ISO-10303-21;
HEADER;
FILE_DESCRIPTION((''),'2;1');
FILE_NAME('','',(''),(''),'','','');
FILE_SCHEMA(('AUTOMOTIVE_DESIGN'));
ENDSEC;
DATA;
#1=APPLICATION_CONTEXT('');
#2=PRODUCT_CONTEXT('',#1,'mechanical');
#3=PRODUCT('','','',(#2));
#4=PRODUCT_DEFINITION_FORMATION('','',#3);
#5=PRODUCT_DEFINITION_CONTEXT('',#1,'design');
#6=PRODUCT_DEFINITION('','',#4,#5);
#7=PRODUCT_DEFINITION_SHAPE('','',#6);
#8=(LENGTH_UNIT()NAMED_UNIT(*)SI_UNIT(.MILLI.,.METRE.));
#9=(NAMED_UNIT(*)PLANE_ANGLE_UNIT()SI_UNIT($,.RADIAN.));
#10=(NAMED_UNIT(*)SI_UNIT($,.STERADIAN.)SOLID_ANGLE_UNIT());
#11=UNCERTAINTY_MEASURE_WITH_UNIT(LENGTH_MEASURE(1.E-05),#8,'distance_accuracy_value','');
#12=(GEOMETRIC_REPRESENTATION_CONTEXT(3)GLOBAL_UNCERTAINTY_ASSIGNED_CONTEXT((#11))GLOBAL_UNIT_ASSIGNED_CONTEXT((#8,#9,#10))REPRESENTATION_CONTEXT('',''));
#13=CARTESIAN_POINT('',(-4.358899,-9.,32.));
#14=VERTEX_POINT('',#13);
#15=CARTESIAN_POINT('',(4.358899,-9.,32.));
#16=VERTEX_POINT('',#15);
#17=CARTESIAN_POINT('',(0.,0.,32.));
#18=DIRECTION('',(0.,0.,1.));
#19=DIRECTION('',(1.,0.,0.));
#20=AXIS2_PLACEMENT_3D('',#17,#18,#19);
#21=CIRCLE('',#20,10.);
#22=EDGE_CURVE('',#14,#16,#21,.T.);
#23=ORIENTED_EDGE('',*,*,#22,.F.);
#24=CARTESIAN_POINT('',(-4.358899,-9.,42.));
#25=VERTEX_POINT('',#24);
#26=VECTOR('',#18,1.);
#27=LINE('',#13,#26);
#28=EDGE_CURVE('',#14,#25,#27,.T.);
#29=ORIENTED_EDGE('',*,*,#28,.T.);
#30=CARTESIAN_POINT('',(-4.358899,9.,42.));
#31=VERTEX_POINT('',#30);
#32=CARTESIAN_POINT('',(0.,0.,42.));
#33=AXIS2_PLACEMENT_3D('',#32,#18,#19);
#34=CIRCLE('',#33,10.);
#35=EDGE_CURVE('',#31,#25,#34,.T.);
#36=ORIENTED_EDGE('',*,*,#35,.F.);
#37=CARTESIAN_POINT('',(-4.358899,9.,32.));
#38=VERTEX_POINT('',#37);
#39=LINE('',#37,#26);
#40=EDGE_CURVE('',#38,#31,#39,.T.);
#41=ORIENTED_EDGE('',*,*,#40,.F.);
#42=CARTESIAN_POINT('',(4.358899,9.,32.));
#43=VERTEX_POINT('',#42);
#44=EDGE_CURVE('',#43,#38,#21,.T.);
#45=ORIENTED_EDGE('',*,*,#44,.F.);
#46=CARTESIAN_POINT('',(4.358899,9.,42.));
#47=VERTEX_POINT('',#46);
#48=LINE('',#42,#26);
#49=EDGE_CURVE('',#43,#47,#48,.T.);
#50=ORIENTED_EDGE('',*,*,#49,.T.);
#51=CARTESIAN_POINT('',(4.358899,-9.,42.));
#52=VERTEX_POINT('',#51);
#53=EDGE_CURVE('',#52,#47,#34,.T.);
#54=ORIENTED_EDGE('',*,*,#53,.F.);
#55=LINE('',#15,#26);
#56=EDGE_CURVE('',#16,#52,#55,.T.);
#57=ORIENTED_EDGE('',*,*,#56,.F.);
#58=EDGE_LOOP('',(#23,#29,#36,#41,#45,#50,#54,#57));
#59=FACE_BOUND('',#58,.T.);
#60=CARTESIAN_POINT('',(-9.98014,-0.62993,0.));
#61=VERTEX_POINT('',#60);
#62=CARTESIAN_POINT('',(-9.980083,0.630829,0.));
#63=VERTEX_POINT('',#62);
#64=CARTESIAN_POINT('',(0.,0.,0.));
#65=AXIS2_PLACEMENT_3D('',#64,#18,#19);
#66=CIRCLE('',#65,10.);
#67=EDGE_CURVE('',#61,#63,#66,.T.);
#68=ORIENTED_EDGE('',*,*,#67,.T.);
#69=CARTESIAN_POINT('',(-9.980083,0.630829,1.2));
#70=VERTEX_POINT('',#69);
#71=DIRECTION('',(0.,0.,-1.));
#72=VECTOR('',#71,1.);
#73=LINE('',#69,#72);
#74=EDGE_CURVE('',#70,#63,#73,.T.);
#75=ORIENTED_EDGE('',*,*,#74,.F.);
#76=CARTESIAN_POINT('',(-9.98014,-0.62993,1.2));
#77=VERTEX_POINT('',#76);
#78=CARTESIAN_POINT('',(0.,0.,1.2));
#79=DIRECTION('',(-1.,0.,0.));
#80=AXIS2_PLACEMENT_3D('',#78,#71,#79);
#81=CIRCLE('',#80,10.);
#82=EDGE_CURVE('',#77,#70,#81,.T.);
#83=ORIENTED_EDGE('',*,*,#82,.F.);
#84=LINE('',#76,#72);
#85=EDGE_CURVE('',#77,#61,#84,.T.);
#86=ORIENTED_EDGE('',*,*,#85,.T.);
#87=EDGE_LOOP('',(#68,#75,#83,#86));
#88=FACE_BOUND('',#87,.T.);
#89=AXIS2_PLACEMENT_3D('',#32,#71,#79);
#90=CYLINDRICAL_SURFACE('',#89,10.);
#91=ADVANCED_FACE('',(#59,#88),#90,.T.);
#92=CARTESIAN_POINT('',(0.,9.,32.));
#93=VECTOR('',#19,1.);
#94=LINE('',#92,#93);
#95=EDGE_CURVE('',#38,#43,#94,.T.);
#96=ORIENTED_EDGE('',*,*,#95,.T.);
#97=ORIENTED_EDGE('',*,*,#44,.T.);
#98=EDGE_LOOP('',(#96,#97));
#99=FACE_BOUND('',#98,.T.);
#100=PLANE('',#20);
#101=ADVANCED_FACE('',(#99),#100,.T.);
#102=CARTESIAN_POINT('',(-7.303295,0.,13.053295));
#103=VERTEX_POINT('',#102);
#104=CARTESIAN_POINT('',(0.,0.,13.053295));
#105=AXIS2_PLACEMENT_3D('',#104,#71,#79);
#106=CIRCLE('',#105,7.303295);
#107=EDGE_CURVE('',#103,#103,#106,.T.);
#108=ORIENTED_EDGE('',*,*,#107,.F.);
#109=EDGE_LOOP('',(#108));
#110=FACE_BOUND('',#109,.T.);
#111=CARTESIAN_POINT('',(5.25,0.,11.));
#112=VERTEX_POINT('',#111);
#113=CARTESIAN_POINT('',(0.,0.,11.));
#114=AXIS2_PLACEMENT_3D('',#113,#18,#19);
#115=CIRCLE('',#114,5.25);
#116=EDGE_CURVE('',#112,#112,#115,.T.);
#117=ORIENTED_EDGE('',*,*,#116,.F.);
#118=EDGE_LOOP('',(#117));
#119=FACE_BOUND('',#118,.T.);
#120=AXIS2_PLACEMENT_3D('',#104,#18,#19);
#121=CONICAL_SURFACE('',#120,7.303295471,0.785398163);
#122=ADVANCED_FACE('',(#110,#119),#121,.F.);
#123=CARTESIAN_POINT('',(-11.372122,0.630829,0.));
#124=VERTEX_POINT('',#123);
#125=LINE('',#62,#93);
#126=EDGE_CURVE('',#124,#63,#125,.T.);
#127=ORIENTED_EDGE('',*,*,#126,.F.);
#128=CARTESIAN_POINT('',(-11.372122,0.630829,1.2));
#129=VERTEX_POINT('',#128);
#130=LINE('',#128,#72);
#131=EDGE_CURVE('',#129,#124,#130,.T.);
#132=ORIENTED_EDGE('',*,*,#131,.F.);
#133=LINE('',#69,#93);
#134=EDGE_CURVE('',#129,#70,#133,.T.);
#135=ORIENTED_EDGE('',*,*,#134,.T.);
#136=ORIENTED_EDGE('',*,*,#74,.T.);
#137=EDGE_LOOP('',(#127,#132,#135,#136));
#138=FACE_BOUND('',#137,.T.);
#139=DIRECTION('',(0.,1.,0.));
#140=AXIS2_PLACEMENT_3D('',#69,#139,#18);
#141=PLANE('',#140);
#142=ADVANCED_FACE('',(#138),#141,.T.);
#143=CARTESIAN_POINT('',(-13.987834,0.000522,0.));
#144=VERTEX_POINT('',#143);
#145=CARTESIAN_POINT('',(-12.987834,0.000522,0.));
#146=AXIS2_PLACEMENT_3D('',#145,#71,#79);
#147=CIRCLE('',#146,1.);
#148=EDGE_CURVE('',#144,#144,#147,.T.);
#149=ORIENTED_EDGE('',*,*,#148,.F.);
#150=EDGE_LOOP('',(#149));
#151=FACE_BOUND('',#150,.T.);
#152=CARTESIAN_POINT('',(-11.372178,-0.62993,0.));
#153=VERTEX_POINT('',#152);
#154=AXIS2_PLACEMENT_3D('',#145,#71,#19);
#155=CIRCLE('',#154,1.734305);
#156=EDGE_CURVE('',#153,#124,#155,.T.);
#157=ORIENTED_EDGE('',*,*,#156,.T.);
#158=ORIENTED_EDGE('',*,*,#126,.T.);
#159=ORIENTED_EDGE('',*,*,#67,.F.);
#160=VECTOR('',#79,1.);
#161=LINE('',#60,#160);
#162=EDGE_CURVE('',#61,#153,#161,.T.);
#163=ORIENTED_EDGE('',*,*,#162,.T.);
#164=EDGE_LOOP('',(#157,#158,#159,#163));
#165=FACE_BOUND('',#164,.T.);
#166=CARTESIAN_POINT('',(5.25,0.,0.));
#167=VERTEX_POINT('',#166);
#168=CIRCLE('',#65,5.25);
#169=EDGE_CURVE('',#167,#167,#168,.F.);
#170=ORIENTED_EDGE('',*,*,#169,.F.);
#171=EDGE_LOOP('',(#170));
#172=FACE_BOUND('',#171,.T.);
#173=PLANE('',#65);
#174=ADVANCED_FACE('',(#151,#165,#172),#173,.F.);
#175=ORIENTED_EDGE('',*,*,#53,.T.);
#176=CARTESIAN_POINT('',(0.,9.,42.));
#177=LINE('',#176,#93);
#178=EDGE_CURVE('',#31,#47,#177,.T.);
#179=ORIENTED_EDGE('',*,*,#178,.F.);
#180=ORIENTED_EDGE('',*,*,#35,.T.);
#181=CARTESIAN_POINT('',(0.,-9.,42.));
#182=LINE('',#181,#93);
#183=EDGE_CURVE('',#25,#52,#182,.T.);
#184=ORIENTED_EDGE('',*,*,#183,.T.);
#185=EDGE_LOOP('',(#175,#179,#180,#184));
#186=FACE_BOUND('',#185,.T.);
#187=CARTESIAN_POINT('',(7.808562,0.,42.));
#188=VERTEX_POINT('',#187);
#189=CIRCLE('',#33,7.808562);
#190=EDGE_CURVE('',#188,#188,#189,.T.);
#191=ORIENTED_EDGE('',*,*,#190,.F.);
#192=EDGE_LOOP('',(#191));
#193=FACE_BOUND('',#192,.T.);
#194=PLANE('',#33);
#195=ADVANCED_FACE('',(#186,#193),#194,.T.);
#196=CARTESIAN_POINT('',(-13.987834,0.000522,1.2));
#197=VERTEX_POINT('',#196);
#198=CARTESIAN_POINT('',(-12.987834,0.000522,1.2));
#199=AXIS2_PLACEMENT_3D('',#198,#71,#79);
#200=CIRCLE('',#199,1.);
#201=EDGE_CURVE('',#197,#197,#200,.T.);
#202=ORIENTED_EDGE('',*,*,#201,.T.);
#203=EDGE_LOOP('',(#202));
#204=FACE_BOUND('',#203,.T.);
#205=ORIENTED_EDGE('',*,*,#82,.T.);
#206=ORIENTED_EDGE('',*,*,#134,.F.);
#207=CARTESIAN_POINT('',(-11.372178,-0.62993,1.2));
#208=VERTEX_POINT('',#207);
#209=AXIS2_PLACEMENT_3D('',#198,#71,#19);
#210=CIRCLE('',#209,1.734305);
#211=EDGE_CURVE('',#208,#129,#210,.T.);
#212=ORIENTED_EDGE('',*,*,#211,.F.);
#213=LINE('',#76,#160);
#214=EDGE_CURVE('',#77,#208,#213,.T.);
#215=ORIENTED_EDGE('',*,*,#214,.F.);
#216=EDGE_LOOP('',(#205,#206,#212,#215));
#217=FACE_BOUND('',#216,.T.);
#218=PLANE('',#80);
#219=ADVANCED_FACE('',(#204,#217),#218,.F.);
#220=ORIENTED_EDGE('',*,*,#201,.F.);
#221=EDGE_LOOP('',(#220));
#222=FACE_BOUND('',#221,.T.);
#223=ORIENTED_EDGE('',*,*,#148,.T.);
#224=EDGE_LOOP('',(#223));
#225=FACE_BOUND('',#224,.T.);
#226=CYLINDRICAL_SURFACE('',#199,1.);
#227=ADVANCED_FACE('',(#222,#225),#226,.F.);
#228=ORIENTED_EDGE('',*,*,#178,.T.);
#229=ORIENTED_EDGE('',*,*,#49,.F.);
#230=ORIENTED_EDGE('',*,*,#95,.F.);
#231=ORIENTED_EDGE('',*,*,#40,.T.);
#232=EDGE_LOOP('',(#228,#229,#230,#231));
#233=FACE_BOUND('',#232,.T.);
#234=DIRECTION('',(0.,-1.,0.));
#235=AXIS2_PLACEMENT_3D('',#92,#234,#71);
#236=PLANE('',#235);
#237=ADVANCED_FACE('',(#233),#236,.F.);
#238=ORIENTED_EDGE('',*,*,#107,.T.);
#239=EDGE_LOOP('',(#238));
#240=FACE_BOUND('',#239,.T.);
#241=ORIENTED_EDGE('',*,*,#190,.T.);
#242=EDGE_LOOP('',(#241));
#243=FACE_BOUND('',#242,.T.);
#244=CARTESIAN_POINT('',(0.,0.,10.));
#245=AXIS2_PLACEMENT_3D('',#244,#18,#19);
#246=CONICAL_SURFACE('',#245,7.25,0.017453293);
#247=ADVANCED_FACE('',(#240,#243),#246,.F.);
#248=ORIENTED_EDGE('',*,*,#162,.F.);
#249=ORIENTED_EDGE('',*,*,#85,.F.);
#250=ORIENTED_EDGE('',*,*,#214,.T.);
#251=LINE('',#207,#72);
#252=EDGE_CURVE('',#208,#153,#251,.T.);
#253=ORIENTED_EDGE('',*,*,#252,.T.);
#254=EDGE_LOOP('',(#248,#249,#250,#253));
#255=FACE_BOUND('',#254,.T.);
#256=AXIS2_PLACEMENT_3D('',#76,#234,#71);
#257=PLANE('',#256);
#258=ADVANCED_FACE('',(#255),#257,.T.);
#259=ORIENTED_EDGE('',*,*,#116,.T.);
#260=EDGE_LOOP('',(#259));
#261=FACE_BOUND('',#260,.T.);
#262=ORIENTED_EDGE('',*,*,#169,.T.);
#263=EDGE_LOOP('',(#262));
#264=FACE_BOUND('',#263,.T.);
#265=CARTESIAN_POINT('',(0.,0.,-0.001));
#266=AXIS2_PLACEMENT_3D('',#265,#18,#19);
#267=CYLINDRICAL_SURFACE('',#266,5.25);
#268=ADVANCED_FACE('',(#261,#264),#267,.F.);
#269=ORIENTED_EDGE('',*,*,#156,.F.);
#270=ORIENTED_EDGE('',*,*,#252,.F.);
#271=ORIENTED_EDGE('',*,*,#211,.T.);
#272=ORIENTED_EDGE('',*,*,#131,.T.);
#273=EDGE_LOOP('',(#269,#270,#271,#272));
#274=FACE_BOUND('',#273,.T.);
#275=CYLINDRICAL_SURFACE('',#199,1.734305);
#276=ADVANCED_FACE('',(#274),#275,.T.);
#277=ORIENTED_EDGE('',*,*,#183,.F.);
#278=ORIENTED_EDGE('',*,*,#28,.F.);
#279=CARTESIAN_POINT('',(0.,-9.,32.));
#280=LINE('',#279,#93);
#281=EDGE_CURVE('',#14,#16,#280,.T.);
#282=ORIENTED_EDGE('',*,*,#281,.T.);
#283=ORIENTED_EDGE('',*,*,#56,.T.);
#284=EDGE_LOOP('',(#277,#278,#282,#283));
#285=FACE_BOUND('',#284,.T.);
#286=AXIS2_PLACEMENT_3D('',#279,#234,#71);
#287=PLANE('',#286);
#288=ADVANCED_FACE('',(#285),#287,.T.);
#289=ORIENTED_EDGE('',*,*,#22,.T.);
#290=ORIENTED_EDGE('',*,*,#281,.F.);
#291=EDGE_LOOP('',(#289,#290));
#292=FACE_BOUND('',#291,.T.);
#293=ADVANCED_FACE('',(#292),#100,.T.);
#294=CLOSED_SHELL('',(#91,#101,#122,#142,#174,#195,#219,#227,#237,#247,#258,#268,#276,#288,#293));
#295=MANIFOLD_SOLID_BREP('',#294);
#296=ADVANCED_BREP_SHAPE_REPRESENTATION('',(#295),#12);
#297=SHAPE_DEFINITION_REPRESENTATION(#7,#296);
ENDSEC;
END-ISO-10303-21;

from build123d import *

# Parameters (mm, degrees)
SKETCH1_R           = 10
BOSS_EXTRUDE1_DEPTH = 42
CUT_EXTRUDE1_REACH  = 46.317
SKETCH2_R           = 5.25
SKETCH3_R           = 7.25
CUT_EXTRUDE2_DEPTH  = 32
SKETCH4_R           = 1
SKETCH4_R_2         = 5.25
BOSS_EXTRUDE2_DEPTH = 1.2
CUT_EXTRUDE3_START  = -10
CUT_EXTRUDE3_DEPTH  = 10
DRAFT1_ANGLE        = 1
CHAMFER1_SIZE       = 3
CHAMFER1_SIZE_2     = 3.053760573


with BuildPart() as part:
    # Sketch1 → Boss-Extrude1 (new body)
    with BuildSketch(Plane.XY):
        with Locations(Location((0, 0, 0), (0, 0, 180))):
            Circle(SKETCH1_R)
    extrude(amount=BOSS_EXTRUDE1_DEPTH)

    # Sketch2 → Cut-Extrude1 (cut, up to next)
    with BuildSketch(Plane.XY.offset(42), mode=Mode.PRIVATE) as cut_extrude1_sk1:
        Circle(SKETCH2_R)
    cut_extrude1_tool1 = extrude(cut_extrude1_sk1.sketch, amount=-CUT_EXTRUDE1_REACH, mode=Mode.PRIVATE) & part.part
    add(cut_extrude1_tool1.solids().sort_by_distance((0, 0, 42))[0], mode=Mode.SUBTRACT)

    # Sketch3 → Cut-Extrude2 (cut)
    with BuildSketch(Plane.XY.offset(42)):
        Circle(SKETCH3_R)
    extrude(amount=-CUT_EXTRUDE2_DEPTH, mode=Mode.SUBTRACT)

    # Sketch4 → Boss-Extrude2 (add)
    with BuildSketch(Plane(origin=(0, 0, 0), x_dir=(-1, 0, 0), z_dir=(0, 0, -1))):
        with BuildLine():
            Line((9.98013969, -0.629929975), (11.372178356, -0.629929975))
            ThreePointArc((11.372178356, -0.629929975), (14.722138794, 0.000600368), (11.372121573, 0.630828953))
            Line((11.372121573, 0.630828953), (9.980082907, 0.630828953))
            ThreePointArc((9.980082907, 0.630828953), (-9.99999999, -0.000450385), (9.98013969, -0.629929975))
        make_face()
        with Locations((12.987833992, 0.000522257)):
            Circle(SKETCH4_R, mode=Mode.SUBTRACT)
        with Locations(Location((0, 0, 0), (0, 0, 180))):
            Circle(SKETCH4_R_2, mode=Mode.SUBTRACT)
    extrude(amount=-BOSS_EXTRUDE2_DEPTH)

    # Sketch5 → Cut-Extrude3 (cut)
    with BuildSketch(Plane.XY.offset(42).offset(CUT_EXTRUDE3_START)):
        with BuildLine():
            ThreePointArc((4.358898944, 9), (0, 10), (-4.358898944, 9))
            Line((-4.358898944, 9), (4.358898944, 9))
        make_face()
        with BuildLine():
            Line((4.358898944, -9), (-4.358898944, -9))
            ThreePointArc((-4.358898944, -9), (0, -10), (4.358898944, -9))
        make_face()
    extrude(amount=CUT_EXTRUDE3_DEPTH, mode=Mode.SUBTRACT)

    # Draft1
    draft1_faces = [part.faces().sort_by_distance(p)[0] for p in [
        (-7.25, 0, 26),
    ]]
    draft(draft1_faces, Plane.XY.offset(10), DRAFT1_ANGLE)

    # Chamfer1
    # the kernel refuses this chamfer: 3.053760573, 3 mm, written as the material it adds along each edge
    with BuildSketch(Plane(origin=(0, 0, 10), x_dir=(1, 0, 0), z_dir=(0, -1, 0))) as chamfer1_piece_1_section:
        Polygon((7.25 - CHAMFER1_SIZE, 0), (7.25 + CHAMFER1_SIZE_2 * 0.0174524064385, CHAMFER1_SIZE_2 * 0.999847695226), (7.25, 0), align=None)
    chamfer1_piece_1 = revolve(axis=Axis((0, 0, 10), (0, 0, 1)), mode=Mode.PRIVATE)
    chamfer1_piece_1 = chamfer1_piece_1 - Plane(origin=(0, 0, 12.029896957), x_dir=(1, 0, 0), z_dir=(0, 0, 1)) * Cylinder(5.25, 30, mode=Mode.PRIVATE)
    add(chamfer1_piece_1)


solid = part.part
